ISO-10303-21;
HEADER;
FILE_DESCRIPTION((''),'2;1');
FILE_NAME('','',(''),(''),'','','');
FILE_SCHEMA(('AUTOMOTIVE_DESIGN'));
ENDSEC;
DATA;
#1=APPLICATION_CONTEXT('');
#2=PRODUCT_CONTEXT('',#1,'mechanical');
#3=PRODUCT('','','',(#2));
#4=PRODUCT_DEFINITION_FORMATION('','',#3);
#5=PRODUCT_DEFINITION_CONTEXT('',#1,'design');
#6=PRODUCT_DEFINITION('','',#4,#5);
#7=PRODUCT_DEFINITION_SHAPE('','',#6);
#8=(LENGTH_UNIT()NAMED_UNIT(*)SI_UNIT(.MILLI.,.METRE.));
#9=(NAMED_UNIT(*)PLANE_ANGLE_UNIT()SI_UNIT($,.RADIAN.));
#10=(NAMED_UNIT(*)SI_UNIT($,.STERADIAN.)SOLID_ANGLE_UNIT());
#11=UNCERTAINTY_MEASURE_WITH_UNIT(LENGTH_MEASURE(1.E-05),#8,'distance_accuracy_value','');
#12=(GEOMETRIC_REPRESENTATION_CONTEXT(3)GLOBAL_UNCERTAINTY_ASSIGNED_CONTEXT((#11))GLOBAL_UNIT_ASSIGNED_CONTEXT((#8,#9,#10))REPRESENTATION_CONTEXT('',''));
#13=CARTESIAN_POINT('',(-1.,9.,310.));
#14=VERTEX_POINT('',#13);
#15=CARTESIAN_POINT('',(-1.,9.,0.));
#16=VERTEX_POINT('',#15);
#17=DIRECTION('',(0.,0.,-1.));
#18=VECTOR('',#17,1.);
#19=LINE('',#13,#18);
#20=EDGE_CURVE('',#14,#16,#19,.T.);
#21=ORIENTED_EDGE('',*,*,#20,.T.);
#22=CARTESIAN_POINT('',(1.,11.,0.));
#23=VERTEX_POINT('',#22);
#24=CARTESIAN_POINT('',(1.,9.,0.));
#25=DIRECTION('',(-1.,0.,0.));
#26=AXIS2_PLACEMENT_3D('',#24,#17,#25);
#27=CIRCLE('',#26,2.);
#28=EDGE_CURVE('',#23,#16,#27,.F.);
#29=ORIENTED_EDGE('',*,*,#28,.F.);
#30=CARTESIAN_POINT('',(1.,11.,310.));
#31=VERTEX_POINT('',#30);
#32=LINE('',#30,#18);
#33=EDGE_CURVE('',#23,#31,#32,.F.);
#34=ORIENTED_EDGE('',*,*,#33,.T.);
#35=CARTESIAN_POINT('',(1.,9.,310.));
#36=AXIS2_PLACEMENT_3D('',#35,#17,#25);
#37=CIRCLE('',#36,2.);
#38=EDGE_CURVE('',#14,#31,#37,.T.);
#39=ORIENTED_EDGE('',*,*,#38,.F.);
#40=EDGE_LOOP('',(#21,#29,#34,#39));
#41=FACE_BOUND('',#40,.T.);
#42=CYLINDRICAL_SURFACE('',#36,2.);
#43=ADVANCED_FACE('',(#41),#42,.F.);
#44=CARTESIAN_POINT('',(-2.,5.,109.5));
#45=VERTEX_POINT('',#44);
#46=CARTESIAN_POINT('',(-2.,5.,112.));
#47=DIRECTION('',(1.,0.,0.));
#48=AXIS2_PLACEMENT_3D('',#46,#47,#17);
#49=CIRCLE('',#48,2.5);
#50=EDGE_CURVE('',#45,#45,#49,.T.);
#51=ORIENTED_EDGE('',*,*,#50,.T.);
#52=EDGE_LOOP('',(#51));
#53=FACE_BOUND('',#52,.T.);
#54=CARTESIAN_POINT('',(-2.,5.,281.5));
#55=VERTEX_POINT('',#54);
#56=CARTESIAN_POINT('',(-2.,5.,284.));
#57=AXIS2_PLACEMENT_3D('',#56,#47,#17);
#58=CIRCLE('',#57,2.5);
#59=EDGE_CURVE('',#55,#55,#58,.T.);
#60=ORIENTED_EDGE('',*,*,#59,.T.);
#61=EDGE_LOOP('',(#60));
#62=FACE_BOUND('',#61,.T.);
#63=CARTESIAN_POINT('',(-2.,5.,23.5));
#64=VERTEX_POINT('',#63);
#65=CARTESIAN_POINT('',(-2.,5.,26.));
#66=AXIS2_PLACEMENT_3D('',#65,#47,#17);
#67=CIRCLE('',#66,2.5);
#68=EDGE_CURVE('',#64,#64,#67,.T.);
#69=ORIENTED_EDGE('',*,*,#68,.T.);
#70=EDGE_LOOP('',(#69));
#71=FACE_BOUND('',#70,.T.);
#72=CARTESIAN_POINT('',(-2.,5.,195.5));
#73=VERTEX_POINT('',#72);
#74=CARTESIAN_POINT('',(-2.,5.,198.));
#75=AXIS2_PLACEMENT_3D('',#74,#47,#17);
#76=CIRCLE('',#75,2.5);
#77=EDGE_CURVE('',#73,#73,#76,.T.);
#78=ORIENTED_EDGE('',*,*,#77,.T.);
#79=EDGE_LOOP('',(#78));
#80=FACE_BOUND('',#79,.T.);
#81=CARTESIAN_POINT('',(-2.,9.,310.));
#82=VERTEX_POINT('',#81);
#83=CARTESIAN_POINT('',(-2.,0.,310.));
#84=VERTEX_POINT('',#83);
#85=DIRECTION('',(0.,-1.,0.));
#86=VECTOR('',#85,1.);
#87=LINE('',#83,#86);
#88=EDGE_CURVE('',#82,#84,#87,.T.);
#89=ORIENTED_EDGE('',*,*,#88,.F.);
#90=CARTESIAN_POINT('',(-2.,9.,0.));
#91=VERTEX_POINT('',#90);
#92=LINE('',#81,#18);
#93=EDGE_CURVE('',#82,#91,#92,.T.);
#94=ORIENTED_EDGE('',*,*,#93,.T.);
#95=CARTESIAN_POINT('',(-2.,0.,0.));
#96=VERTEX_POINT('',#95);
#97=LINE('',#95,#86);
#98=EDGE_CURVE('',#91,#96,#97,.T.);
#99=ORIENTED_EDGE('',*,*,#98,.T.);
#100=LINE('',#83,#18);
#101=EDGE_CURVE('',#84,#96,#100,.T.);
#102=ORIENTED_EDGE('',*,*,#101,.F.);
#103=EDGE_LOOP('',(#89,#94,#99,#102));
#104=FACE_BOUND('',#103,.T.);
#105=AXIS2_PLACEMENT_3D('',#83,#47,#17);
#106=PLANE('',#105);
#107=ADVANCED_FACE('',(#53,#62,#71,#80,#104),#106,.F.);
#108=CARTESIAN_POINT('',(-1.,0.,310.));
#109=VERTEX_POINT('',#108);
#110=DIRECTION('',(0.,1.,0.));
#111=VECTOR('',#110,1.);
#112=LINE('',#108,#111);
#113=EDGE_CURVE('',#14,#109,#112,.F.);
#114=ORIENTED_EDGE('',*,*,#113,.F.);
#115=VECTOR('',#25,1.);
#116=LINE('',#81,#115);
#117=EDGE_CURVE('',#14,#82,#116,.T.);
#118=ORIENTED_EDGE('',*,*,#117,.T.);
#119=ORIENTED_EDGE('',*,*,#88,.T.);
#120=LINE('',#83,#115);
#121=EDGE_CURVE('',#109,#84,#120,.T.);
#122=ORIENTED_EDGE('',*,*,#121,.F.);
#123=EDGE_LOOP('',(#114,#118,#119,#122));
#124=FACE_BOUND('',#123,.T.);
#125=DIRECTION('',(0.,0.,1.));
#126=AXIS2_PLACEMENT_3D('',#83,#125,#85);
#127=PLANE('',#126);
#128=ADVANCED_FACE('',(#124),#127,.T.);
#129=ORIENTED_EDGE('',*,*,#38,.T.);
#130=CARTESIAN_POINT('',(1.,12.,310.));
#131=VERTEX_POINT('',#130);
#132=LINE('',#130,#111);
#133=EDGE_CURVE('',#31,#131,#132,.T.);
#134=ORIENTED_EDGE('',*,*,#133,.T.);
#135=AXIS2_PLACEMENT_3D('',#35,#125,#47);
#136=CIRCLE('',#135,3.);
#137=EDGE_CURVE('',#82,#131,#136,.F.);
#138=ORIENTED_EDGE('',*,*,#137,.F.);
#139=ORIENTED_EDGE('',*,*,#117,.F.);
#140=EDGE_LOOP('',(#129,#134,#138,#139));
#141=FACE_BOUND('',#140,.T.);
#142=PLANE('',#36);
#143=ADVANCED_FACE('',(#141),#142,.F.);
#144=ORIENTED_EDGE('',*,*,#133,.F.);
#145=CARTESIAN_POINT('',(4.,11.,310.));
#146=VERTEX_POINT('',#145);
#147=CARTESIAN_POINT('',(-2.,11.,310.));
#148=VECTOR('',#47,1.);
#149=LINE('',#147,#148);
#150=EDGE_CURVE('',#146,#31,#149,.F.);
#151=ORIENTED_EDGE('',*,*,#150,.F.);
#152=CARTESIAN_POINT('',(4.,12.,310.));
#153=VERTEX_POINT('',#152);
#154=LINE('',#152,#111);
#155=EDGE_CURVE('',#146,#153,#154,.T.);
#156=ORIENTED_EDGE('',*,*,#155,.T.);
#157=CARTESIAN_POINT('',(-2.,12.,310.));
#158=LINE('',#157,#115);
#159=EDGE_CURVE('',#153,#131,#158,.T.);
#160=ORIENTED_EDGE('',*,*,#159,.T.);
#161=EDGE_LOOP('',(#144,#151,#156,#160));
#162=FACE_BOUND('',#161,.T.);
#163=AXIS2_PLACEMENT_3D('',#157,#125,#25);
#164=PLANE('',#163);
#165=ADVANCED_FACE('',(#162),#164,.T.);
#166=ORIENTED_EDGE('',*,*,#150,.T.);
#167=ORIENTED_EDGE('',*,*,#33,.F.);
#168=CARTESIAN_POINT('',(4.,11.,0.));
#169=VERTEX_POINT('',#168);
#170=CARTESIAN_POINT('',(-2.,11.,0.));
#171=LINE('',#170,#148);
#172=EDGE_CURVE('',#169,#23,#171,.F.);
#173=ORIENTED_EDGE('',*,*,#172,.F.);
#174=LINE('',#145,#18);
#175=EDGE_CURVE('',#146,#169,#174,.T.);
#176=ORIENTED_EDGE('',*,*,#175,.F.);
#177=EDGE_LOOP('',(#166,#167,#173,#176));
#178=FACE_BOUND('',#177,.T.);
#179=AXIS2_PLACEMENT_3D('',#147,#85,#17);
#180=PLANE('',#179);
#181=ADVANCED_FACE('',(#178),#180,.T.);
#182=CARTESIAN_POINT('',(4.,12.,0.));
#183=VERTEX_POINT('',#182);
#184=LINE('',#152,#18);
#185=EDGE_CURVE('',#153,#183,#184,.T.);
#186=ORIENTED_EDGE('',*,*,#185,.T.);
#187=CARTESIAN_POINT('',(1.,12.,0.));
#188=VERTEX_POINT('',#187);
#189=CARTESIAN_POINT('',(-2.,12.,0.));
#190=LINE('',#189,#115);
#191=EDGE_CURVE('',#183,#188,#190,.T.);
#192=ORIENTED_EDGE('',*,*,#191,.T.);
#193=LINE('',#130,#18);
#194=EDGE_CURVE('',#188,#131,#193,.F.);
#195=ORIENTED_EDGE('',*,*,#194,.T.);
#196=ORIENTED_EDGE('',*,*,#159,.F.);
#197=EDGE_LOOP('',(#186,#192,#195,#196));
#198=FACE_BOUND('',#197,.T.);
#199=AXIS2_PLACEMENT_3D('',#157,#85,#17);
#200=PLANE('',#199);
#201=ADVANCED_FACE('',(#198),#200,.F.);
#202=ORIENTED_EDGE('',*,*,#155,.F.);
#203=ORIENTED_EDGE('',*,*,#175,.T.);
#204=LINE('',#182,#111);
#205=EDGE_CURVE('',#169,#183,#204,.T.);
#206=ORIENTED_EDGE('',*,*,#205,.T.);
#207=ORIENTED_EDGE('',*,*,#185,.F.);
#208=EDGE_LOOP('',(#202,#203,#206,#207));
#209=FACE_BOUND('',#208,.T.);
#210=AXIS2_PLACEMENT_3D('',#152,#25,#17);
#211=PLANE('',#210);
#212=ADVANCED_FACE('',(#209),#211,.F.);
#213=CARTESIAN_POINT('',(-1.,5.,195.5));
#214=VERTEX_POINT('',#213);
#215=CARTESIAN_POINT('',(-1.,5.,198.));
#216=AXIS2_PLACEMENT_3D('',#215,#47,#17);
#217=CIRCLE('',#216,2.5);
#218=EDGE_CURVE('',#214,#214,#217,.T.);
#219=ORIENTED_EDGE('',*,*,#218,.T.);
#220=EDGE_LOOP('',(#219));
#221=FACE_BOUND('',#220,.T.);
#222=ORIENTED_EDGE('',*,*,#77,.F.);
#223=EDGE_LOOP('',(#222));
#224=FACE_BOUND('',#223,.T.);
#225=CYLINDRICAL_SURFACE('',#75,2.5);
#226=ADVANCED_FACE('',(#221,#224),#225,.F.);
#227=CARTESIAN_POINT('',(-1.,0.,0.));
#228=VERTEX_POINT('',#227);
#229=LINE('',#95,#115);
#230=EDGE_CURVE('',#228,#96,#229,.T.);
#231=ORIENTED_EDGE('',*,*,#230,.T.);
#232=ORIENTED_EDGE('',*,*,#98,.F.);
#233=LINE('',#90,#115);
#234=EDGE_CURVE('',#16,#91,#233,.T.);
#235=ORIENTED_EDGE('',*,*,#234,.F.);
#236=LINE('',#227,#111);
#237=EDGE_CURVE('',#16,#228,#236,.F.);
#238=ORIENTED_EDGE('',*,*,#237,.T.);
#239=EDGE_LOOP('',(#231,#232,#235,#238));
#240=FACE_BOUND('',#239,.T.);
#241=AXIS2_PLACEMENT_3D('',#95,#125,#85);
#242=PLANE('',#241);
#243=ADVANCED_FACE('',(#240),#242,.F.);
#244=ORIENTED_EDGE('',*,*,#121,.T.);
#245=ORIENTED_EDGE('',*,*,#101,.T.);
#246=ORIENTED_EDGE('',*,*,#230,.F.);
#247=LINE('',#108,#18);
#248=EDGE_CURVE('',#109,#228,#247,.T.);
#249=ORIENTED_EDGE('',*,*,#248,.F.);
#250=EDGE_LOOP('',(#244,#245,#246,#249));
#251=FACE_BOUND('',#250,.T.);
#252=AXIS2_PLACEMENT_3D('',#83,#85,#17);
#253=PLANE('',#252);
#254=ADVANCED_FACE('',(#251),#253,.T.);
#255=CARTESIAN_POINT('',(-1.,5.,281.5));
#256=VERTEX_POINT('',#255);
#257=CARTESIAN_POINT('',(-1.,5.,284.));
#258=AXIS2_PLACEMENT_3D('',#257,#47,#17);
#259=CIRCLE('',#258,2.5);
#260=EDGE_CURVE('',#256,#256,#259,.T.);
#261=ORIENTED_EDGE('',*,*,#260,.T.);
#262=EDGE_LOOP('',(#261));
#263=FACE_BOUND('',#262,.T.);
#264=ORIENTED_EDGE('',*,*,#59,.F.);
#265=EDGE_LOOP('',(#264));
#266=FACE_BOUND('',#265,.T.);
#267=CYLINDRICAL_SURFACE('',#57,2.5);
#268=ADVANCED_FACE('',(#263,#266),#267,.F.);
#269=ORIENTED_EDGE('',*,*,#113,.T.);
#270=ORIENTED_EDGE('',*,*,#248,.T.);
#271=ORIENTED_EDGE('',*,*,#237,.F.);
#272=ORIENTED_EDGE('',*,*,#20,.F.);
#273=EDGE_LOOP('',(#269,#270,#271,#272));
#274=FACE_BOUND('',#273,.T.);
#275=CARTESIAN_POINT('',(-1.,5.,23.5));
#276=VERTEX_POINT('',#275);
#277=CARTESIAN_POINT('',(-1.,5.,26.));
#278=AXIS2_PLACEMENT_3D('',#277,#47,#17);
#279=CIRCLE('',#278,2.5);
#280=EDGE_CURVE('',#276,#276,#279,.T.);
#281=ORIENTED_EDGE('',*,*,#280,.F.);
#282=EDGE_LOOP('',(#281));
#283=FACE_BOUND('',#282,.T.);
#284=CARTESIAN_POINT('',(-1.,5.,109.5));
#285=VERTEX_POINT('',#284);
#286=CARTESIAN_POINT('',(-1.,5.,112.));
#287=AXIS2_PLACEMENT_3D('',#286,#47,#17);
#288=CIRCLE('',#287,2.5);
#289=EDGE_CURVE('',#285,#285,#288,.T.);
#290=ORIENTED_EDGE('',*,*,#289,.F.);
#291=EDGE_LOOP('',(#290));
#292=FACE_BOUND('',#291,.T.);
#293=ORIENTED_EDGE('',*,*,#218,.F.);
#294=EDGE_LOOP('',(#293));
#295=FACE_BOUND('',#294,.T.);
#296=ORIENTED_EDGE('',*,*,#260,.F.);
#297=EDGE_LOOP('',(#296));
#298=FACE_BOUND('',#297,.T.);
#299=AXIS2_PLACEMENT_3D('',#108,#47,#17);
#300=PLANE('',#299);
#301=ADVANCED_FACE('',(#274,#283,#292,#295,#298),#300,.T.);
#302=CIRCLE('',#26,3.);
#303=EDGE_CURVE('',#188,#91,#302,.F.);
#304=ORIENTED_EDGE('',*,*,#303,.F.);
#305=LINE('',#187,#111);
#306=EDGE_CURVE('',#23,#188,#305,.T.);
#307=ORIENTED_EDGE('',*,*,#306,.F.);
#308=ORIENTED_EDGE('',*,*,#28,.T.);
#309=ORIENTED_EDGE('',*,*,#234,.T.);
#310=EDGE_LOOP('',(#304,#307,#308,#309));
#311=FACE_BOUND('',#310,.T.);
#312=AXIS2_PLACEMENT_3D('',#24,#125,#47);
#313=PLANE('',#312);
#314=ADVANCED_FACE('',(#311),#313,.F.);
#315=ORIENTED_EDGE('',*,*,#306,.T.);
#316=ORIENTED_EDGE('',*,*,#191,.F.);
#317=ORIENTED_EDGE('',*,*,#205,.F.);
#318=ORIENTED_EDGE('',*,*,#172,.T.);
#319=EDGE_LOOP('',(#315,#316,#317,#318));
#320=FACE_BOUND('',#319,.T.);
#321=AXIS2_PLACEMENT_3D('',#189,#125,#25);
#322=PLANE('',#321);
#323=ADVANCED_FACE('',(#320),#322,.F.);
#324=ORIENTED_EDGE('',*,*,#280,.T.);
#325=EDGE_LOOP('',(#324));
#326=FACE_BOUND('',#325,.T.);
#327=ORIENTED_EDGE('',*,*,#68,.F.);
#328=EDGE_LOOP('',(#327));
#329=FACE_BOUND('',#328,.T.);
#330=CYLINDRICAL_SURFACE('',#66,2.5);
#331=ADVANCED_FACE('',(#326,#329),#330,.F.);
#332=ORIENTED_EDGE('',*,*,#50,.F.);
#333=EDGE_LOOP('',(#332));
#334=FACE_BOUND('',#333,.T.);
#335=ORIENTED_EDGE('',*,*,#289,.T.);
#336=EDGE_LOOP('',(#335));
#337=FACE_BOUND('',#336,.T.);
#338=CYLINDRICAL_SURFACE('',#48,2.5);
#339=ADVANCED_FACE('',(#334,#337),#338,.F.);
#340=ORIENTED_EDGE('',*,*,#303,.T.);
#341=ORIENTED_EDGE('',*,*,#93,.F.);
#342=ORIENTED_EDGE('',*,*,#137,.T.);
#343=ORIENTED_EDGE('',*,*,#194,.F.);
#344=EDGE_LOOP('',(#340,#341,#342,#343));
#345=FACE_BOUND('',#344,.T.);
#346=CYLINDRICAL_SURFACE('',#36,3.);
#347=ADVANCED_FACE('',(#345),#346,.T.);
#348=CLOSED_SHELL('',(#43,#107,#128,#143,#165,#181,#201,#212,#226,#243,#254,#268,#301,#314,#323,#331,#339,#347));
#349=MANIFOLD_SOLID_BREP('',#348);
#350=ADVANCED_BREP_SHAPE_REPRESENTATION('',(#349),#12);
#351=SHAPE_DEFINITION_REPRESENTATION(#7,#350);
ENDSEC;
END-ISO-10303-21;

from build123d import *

# Parameters (mm, degrees)
BOSS_EXTRUDE1_DEPTH  = 310
SKETCH2_R            = 2.5
CUT_EXTRUDE1_DEPTH   = 311.25795719
CONVERT_SOLID2_DEPTH = 310


# Read off the part's stored shape, not the designer's step: Convert-Solid2
with BuildPart() as part:
    # Sketch1 → Boss-Extrude1 (new body)
    with BuildSketch(Plane.XY):
        Polygon((0, 0), (0, 10), (4, 10), (4, 12), (-2, 12), (-2, 0), align=None)
    extrude(amount=BOSS_EXTRUDE1_DEPTH)

    # Sketch2 → Cut-Extrude1 (cut, through all)
    with BuildSketch(Plane(origin=(0, 0, 0), x_dir=(0, 0, -1), z_dir=(1, 0, 0))):
        with Locations((-284, 5)):
            Circle(SKETCH2_R)
        with Locations((-198, 5)):
            Circle(SKETCH2_R)
        with Locations((-112, 5)):
            Circle(SKETCH2_R)
        with Locations((-26, 5)):
            Circle(SKETCH2_R)
    extrude(amount=-CUT_EXTRUDE1_DEPTH, mode=Mode.SUBTRACT)

    # Convert-Solid2 outline → Convert-Solid2 (cut)
    with BuildSketch(Plane.XY):
        with BuildLine():
            Line((-2, 12), (-2, 9))
            ThreePointArc((-2, 9), (-1.121320344, 11.121320344), (1, 12))
            Line((1, 12), (-2, 12))
        make_face()
        with BuildLine():
            Line((-1, 9), (-1, 0))
            Line((-1, 0), (0, 0))
            Line((0, 0), (0, 10))
            Line((0, 10), (4, 10))
            Line((4, 10), (4, 11))
            Line((4, 11), (1, 11))
            ThreePointArc((1, 11), (-0.414213562, 10.414213562), (-1, 9))
        make_face()
    extrude(amount=CONVERT_SOLID2_DEPTH, mode=Mode.SUBTRACT)


solid = part.part
